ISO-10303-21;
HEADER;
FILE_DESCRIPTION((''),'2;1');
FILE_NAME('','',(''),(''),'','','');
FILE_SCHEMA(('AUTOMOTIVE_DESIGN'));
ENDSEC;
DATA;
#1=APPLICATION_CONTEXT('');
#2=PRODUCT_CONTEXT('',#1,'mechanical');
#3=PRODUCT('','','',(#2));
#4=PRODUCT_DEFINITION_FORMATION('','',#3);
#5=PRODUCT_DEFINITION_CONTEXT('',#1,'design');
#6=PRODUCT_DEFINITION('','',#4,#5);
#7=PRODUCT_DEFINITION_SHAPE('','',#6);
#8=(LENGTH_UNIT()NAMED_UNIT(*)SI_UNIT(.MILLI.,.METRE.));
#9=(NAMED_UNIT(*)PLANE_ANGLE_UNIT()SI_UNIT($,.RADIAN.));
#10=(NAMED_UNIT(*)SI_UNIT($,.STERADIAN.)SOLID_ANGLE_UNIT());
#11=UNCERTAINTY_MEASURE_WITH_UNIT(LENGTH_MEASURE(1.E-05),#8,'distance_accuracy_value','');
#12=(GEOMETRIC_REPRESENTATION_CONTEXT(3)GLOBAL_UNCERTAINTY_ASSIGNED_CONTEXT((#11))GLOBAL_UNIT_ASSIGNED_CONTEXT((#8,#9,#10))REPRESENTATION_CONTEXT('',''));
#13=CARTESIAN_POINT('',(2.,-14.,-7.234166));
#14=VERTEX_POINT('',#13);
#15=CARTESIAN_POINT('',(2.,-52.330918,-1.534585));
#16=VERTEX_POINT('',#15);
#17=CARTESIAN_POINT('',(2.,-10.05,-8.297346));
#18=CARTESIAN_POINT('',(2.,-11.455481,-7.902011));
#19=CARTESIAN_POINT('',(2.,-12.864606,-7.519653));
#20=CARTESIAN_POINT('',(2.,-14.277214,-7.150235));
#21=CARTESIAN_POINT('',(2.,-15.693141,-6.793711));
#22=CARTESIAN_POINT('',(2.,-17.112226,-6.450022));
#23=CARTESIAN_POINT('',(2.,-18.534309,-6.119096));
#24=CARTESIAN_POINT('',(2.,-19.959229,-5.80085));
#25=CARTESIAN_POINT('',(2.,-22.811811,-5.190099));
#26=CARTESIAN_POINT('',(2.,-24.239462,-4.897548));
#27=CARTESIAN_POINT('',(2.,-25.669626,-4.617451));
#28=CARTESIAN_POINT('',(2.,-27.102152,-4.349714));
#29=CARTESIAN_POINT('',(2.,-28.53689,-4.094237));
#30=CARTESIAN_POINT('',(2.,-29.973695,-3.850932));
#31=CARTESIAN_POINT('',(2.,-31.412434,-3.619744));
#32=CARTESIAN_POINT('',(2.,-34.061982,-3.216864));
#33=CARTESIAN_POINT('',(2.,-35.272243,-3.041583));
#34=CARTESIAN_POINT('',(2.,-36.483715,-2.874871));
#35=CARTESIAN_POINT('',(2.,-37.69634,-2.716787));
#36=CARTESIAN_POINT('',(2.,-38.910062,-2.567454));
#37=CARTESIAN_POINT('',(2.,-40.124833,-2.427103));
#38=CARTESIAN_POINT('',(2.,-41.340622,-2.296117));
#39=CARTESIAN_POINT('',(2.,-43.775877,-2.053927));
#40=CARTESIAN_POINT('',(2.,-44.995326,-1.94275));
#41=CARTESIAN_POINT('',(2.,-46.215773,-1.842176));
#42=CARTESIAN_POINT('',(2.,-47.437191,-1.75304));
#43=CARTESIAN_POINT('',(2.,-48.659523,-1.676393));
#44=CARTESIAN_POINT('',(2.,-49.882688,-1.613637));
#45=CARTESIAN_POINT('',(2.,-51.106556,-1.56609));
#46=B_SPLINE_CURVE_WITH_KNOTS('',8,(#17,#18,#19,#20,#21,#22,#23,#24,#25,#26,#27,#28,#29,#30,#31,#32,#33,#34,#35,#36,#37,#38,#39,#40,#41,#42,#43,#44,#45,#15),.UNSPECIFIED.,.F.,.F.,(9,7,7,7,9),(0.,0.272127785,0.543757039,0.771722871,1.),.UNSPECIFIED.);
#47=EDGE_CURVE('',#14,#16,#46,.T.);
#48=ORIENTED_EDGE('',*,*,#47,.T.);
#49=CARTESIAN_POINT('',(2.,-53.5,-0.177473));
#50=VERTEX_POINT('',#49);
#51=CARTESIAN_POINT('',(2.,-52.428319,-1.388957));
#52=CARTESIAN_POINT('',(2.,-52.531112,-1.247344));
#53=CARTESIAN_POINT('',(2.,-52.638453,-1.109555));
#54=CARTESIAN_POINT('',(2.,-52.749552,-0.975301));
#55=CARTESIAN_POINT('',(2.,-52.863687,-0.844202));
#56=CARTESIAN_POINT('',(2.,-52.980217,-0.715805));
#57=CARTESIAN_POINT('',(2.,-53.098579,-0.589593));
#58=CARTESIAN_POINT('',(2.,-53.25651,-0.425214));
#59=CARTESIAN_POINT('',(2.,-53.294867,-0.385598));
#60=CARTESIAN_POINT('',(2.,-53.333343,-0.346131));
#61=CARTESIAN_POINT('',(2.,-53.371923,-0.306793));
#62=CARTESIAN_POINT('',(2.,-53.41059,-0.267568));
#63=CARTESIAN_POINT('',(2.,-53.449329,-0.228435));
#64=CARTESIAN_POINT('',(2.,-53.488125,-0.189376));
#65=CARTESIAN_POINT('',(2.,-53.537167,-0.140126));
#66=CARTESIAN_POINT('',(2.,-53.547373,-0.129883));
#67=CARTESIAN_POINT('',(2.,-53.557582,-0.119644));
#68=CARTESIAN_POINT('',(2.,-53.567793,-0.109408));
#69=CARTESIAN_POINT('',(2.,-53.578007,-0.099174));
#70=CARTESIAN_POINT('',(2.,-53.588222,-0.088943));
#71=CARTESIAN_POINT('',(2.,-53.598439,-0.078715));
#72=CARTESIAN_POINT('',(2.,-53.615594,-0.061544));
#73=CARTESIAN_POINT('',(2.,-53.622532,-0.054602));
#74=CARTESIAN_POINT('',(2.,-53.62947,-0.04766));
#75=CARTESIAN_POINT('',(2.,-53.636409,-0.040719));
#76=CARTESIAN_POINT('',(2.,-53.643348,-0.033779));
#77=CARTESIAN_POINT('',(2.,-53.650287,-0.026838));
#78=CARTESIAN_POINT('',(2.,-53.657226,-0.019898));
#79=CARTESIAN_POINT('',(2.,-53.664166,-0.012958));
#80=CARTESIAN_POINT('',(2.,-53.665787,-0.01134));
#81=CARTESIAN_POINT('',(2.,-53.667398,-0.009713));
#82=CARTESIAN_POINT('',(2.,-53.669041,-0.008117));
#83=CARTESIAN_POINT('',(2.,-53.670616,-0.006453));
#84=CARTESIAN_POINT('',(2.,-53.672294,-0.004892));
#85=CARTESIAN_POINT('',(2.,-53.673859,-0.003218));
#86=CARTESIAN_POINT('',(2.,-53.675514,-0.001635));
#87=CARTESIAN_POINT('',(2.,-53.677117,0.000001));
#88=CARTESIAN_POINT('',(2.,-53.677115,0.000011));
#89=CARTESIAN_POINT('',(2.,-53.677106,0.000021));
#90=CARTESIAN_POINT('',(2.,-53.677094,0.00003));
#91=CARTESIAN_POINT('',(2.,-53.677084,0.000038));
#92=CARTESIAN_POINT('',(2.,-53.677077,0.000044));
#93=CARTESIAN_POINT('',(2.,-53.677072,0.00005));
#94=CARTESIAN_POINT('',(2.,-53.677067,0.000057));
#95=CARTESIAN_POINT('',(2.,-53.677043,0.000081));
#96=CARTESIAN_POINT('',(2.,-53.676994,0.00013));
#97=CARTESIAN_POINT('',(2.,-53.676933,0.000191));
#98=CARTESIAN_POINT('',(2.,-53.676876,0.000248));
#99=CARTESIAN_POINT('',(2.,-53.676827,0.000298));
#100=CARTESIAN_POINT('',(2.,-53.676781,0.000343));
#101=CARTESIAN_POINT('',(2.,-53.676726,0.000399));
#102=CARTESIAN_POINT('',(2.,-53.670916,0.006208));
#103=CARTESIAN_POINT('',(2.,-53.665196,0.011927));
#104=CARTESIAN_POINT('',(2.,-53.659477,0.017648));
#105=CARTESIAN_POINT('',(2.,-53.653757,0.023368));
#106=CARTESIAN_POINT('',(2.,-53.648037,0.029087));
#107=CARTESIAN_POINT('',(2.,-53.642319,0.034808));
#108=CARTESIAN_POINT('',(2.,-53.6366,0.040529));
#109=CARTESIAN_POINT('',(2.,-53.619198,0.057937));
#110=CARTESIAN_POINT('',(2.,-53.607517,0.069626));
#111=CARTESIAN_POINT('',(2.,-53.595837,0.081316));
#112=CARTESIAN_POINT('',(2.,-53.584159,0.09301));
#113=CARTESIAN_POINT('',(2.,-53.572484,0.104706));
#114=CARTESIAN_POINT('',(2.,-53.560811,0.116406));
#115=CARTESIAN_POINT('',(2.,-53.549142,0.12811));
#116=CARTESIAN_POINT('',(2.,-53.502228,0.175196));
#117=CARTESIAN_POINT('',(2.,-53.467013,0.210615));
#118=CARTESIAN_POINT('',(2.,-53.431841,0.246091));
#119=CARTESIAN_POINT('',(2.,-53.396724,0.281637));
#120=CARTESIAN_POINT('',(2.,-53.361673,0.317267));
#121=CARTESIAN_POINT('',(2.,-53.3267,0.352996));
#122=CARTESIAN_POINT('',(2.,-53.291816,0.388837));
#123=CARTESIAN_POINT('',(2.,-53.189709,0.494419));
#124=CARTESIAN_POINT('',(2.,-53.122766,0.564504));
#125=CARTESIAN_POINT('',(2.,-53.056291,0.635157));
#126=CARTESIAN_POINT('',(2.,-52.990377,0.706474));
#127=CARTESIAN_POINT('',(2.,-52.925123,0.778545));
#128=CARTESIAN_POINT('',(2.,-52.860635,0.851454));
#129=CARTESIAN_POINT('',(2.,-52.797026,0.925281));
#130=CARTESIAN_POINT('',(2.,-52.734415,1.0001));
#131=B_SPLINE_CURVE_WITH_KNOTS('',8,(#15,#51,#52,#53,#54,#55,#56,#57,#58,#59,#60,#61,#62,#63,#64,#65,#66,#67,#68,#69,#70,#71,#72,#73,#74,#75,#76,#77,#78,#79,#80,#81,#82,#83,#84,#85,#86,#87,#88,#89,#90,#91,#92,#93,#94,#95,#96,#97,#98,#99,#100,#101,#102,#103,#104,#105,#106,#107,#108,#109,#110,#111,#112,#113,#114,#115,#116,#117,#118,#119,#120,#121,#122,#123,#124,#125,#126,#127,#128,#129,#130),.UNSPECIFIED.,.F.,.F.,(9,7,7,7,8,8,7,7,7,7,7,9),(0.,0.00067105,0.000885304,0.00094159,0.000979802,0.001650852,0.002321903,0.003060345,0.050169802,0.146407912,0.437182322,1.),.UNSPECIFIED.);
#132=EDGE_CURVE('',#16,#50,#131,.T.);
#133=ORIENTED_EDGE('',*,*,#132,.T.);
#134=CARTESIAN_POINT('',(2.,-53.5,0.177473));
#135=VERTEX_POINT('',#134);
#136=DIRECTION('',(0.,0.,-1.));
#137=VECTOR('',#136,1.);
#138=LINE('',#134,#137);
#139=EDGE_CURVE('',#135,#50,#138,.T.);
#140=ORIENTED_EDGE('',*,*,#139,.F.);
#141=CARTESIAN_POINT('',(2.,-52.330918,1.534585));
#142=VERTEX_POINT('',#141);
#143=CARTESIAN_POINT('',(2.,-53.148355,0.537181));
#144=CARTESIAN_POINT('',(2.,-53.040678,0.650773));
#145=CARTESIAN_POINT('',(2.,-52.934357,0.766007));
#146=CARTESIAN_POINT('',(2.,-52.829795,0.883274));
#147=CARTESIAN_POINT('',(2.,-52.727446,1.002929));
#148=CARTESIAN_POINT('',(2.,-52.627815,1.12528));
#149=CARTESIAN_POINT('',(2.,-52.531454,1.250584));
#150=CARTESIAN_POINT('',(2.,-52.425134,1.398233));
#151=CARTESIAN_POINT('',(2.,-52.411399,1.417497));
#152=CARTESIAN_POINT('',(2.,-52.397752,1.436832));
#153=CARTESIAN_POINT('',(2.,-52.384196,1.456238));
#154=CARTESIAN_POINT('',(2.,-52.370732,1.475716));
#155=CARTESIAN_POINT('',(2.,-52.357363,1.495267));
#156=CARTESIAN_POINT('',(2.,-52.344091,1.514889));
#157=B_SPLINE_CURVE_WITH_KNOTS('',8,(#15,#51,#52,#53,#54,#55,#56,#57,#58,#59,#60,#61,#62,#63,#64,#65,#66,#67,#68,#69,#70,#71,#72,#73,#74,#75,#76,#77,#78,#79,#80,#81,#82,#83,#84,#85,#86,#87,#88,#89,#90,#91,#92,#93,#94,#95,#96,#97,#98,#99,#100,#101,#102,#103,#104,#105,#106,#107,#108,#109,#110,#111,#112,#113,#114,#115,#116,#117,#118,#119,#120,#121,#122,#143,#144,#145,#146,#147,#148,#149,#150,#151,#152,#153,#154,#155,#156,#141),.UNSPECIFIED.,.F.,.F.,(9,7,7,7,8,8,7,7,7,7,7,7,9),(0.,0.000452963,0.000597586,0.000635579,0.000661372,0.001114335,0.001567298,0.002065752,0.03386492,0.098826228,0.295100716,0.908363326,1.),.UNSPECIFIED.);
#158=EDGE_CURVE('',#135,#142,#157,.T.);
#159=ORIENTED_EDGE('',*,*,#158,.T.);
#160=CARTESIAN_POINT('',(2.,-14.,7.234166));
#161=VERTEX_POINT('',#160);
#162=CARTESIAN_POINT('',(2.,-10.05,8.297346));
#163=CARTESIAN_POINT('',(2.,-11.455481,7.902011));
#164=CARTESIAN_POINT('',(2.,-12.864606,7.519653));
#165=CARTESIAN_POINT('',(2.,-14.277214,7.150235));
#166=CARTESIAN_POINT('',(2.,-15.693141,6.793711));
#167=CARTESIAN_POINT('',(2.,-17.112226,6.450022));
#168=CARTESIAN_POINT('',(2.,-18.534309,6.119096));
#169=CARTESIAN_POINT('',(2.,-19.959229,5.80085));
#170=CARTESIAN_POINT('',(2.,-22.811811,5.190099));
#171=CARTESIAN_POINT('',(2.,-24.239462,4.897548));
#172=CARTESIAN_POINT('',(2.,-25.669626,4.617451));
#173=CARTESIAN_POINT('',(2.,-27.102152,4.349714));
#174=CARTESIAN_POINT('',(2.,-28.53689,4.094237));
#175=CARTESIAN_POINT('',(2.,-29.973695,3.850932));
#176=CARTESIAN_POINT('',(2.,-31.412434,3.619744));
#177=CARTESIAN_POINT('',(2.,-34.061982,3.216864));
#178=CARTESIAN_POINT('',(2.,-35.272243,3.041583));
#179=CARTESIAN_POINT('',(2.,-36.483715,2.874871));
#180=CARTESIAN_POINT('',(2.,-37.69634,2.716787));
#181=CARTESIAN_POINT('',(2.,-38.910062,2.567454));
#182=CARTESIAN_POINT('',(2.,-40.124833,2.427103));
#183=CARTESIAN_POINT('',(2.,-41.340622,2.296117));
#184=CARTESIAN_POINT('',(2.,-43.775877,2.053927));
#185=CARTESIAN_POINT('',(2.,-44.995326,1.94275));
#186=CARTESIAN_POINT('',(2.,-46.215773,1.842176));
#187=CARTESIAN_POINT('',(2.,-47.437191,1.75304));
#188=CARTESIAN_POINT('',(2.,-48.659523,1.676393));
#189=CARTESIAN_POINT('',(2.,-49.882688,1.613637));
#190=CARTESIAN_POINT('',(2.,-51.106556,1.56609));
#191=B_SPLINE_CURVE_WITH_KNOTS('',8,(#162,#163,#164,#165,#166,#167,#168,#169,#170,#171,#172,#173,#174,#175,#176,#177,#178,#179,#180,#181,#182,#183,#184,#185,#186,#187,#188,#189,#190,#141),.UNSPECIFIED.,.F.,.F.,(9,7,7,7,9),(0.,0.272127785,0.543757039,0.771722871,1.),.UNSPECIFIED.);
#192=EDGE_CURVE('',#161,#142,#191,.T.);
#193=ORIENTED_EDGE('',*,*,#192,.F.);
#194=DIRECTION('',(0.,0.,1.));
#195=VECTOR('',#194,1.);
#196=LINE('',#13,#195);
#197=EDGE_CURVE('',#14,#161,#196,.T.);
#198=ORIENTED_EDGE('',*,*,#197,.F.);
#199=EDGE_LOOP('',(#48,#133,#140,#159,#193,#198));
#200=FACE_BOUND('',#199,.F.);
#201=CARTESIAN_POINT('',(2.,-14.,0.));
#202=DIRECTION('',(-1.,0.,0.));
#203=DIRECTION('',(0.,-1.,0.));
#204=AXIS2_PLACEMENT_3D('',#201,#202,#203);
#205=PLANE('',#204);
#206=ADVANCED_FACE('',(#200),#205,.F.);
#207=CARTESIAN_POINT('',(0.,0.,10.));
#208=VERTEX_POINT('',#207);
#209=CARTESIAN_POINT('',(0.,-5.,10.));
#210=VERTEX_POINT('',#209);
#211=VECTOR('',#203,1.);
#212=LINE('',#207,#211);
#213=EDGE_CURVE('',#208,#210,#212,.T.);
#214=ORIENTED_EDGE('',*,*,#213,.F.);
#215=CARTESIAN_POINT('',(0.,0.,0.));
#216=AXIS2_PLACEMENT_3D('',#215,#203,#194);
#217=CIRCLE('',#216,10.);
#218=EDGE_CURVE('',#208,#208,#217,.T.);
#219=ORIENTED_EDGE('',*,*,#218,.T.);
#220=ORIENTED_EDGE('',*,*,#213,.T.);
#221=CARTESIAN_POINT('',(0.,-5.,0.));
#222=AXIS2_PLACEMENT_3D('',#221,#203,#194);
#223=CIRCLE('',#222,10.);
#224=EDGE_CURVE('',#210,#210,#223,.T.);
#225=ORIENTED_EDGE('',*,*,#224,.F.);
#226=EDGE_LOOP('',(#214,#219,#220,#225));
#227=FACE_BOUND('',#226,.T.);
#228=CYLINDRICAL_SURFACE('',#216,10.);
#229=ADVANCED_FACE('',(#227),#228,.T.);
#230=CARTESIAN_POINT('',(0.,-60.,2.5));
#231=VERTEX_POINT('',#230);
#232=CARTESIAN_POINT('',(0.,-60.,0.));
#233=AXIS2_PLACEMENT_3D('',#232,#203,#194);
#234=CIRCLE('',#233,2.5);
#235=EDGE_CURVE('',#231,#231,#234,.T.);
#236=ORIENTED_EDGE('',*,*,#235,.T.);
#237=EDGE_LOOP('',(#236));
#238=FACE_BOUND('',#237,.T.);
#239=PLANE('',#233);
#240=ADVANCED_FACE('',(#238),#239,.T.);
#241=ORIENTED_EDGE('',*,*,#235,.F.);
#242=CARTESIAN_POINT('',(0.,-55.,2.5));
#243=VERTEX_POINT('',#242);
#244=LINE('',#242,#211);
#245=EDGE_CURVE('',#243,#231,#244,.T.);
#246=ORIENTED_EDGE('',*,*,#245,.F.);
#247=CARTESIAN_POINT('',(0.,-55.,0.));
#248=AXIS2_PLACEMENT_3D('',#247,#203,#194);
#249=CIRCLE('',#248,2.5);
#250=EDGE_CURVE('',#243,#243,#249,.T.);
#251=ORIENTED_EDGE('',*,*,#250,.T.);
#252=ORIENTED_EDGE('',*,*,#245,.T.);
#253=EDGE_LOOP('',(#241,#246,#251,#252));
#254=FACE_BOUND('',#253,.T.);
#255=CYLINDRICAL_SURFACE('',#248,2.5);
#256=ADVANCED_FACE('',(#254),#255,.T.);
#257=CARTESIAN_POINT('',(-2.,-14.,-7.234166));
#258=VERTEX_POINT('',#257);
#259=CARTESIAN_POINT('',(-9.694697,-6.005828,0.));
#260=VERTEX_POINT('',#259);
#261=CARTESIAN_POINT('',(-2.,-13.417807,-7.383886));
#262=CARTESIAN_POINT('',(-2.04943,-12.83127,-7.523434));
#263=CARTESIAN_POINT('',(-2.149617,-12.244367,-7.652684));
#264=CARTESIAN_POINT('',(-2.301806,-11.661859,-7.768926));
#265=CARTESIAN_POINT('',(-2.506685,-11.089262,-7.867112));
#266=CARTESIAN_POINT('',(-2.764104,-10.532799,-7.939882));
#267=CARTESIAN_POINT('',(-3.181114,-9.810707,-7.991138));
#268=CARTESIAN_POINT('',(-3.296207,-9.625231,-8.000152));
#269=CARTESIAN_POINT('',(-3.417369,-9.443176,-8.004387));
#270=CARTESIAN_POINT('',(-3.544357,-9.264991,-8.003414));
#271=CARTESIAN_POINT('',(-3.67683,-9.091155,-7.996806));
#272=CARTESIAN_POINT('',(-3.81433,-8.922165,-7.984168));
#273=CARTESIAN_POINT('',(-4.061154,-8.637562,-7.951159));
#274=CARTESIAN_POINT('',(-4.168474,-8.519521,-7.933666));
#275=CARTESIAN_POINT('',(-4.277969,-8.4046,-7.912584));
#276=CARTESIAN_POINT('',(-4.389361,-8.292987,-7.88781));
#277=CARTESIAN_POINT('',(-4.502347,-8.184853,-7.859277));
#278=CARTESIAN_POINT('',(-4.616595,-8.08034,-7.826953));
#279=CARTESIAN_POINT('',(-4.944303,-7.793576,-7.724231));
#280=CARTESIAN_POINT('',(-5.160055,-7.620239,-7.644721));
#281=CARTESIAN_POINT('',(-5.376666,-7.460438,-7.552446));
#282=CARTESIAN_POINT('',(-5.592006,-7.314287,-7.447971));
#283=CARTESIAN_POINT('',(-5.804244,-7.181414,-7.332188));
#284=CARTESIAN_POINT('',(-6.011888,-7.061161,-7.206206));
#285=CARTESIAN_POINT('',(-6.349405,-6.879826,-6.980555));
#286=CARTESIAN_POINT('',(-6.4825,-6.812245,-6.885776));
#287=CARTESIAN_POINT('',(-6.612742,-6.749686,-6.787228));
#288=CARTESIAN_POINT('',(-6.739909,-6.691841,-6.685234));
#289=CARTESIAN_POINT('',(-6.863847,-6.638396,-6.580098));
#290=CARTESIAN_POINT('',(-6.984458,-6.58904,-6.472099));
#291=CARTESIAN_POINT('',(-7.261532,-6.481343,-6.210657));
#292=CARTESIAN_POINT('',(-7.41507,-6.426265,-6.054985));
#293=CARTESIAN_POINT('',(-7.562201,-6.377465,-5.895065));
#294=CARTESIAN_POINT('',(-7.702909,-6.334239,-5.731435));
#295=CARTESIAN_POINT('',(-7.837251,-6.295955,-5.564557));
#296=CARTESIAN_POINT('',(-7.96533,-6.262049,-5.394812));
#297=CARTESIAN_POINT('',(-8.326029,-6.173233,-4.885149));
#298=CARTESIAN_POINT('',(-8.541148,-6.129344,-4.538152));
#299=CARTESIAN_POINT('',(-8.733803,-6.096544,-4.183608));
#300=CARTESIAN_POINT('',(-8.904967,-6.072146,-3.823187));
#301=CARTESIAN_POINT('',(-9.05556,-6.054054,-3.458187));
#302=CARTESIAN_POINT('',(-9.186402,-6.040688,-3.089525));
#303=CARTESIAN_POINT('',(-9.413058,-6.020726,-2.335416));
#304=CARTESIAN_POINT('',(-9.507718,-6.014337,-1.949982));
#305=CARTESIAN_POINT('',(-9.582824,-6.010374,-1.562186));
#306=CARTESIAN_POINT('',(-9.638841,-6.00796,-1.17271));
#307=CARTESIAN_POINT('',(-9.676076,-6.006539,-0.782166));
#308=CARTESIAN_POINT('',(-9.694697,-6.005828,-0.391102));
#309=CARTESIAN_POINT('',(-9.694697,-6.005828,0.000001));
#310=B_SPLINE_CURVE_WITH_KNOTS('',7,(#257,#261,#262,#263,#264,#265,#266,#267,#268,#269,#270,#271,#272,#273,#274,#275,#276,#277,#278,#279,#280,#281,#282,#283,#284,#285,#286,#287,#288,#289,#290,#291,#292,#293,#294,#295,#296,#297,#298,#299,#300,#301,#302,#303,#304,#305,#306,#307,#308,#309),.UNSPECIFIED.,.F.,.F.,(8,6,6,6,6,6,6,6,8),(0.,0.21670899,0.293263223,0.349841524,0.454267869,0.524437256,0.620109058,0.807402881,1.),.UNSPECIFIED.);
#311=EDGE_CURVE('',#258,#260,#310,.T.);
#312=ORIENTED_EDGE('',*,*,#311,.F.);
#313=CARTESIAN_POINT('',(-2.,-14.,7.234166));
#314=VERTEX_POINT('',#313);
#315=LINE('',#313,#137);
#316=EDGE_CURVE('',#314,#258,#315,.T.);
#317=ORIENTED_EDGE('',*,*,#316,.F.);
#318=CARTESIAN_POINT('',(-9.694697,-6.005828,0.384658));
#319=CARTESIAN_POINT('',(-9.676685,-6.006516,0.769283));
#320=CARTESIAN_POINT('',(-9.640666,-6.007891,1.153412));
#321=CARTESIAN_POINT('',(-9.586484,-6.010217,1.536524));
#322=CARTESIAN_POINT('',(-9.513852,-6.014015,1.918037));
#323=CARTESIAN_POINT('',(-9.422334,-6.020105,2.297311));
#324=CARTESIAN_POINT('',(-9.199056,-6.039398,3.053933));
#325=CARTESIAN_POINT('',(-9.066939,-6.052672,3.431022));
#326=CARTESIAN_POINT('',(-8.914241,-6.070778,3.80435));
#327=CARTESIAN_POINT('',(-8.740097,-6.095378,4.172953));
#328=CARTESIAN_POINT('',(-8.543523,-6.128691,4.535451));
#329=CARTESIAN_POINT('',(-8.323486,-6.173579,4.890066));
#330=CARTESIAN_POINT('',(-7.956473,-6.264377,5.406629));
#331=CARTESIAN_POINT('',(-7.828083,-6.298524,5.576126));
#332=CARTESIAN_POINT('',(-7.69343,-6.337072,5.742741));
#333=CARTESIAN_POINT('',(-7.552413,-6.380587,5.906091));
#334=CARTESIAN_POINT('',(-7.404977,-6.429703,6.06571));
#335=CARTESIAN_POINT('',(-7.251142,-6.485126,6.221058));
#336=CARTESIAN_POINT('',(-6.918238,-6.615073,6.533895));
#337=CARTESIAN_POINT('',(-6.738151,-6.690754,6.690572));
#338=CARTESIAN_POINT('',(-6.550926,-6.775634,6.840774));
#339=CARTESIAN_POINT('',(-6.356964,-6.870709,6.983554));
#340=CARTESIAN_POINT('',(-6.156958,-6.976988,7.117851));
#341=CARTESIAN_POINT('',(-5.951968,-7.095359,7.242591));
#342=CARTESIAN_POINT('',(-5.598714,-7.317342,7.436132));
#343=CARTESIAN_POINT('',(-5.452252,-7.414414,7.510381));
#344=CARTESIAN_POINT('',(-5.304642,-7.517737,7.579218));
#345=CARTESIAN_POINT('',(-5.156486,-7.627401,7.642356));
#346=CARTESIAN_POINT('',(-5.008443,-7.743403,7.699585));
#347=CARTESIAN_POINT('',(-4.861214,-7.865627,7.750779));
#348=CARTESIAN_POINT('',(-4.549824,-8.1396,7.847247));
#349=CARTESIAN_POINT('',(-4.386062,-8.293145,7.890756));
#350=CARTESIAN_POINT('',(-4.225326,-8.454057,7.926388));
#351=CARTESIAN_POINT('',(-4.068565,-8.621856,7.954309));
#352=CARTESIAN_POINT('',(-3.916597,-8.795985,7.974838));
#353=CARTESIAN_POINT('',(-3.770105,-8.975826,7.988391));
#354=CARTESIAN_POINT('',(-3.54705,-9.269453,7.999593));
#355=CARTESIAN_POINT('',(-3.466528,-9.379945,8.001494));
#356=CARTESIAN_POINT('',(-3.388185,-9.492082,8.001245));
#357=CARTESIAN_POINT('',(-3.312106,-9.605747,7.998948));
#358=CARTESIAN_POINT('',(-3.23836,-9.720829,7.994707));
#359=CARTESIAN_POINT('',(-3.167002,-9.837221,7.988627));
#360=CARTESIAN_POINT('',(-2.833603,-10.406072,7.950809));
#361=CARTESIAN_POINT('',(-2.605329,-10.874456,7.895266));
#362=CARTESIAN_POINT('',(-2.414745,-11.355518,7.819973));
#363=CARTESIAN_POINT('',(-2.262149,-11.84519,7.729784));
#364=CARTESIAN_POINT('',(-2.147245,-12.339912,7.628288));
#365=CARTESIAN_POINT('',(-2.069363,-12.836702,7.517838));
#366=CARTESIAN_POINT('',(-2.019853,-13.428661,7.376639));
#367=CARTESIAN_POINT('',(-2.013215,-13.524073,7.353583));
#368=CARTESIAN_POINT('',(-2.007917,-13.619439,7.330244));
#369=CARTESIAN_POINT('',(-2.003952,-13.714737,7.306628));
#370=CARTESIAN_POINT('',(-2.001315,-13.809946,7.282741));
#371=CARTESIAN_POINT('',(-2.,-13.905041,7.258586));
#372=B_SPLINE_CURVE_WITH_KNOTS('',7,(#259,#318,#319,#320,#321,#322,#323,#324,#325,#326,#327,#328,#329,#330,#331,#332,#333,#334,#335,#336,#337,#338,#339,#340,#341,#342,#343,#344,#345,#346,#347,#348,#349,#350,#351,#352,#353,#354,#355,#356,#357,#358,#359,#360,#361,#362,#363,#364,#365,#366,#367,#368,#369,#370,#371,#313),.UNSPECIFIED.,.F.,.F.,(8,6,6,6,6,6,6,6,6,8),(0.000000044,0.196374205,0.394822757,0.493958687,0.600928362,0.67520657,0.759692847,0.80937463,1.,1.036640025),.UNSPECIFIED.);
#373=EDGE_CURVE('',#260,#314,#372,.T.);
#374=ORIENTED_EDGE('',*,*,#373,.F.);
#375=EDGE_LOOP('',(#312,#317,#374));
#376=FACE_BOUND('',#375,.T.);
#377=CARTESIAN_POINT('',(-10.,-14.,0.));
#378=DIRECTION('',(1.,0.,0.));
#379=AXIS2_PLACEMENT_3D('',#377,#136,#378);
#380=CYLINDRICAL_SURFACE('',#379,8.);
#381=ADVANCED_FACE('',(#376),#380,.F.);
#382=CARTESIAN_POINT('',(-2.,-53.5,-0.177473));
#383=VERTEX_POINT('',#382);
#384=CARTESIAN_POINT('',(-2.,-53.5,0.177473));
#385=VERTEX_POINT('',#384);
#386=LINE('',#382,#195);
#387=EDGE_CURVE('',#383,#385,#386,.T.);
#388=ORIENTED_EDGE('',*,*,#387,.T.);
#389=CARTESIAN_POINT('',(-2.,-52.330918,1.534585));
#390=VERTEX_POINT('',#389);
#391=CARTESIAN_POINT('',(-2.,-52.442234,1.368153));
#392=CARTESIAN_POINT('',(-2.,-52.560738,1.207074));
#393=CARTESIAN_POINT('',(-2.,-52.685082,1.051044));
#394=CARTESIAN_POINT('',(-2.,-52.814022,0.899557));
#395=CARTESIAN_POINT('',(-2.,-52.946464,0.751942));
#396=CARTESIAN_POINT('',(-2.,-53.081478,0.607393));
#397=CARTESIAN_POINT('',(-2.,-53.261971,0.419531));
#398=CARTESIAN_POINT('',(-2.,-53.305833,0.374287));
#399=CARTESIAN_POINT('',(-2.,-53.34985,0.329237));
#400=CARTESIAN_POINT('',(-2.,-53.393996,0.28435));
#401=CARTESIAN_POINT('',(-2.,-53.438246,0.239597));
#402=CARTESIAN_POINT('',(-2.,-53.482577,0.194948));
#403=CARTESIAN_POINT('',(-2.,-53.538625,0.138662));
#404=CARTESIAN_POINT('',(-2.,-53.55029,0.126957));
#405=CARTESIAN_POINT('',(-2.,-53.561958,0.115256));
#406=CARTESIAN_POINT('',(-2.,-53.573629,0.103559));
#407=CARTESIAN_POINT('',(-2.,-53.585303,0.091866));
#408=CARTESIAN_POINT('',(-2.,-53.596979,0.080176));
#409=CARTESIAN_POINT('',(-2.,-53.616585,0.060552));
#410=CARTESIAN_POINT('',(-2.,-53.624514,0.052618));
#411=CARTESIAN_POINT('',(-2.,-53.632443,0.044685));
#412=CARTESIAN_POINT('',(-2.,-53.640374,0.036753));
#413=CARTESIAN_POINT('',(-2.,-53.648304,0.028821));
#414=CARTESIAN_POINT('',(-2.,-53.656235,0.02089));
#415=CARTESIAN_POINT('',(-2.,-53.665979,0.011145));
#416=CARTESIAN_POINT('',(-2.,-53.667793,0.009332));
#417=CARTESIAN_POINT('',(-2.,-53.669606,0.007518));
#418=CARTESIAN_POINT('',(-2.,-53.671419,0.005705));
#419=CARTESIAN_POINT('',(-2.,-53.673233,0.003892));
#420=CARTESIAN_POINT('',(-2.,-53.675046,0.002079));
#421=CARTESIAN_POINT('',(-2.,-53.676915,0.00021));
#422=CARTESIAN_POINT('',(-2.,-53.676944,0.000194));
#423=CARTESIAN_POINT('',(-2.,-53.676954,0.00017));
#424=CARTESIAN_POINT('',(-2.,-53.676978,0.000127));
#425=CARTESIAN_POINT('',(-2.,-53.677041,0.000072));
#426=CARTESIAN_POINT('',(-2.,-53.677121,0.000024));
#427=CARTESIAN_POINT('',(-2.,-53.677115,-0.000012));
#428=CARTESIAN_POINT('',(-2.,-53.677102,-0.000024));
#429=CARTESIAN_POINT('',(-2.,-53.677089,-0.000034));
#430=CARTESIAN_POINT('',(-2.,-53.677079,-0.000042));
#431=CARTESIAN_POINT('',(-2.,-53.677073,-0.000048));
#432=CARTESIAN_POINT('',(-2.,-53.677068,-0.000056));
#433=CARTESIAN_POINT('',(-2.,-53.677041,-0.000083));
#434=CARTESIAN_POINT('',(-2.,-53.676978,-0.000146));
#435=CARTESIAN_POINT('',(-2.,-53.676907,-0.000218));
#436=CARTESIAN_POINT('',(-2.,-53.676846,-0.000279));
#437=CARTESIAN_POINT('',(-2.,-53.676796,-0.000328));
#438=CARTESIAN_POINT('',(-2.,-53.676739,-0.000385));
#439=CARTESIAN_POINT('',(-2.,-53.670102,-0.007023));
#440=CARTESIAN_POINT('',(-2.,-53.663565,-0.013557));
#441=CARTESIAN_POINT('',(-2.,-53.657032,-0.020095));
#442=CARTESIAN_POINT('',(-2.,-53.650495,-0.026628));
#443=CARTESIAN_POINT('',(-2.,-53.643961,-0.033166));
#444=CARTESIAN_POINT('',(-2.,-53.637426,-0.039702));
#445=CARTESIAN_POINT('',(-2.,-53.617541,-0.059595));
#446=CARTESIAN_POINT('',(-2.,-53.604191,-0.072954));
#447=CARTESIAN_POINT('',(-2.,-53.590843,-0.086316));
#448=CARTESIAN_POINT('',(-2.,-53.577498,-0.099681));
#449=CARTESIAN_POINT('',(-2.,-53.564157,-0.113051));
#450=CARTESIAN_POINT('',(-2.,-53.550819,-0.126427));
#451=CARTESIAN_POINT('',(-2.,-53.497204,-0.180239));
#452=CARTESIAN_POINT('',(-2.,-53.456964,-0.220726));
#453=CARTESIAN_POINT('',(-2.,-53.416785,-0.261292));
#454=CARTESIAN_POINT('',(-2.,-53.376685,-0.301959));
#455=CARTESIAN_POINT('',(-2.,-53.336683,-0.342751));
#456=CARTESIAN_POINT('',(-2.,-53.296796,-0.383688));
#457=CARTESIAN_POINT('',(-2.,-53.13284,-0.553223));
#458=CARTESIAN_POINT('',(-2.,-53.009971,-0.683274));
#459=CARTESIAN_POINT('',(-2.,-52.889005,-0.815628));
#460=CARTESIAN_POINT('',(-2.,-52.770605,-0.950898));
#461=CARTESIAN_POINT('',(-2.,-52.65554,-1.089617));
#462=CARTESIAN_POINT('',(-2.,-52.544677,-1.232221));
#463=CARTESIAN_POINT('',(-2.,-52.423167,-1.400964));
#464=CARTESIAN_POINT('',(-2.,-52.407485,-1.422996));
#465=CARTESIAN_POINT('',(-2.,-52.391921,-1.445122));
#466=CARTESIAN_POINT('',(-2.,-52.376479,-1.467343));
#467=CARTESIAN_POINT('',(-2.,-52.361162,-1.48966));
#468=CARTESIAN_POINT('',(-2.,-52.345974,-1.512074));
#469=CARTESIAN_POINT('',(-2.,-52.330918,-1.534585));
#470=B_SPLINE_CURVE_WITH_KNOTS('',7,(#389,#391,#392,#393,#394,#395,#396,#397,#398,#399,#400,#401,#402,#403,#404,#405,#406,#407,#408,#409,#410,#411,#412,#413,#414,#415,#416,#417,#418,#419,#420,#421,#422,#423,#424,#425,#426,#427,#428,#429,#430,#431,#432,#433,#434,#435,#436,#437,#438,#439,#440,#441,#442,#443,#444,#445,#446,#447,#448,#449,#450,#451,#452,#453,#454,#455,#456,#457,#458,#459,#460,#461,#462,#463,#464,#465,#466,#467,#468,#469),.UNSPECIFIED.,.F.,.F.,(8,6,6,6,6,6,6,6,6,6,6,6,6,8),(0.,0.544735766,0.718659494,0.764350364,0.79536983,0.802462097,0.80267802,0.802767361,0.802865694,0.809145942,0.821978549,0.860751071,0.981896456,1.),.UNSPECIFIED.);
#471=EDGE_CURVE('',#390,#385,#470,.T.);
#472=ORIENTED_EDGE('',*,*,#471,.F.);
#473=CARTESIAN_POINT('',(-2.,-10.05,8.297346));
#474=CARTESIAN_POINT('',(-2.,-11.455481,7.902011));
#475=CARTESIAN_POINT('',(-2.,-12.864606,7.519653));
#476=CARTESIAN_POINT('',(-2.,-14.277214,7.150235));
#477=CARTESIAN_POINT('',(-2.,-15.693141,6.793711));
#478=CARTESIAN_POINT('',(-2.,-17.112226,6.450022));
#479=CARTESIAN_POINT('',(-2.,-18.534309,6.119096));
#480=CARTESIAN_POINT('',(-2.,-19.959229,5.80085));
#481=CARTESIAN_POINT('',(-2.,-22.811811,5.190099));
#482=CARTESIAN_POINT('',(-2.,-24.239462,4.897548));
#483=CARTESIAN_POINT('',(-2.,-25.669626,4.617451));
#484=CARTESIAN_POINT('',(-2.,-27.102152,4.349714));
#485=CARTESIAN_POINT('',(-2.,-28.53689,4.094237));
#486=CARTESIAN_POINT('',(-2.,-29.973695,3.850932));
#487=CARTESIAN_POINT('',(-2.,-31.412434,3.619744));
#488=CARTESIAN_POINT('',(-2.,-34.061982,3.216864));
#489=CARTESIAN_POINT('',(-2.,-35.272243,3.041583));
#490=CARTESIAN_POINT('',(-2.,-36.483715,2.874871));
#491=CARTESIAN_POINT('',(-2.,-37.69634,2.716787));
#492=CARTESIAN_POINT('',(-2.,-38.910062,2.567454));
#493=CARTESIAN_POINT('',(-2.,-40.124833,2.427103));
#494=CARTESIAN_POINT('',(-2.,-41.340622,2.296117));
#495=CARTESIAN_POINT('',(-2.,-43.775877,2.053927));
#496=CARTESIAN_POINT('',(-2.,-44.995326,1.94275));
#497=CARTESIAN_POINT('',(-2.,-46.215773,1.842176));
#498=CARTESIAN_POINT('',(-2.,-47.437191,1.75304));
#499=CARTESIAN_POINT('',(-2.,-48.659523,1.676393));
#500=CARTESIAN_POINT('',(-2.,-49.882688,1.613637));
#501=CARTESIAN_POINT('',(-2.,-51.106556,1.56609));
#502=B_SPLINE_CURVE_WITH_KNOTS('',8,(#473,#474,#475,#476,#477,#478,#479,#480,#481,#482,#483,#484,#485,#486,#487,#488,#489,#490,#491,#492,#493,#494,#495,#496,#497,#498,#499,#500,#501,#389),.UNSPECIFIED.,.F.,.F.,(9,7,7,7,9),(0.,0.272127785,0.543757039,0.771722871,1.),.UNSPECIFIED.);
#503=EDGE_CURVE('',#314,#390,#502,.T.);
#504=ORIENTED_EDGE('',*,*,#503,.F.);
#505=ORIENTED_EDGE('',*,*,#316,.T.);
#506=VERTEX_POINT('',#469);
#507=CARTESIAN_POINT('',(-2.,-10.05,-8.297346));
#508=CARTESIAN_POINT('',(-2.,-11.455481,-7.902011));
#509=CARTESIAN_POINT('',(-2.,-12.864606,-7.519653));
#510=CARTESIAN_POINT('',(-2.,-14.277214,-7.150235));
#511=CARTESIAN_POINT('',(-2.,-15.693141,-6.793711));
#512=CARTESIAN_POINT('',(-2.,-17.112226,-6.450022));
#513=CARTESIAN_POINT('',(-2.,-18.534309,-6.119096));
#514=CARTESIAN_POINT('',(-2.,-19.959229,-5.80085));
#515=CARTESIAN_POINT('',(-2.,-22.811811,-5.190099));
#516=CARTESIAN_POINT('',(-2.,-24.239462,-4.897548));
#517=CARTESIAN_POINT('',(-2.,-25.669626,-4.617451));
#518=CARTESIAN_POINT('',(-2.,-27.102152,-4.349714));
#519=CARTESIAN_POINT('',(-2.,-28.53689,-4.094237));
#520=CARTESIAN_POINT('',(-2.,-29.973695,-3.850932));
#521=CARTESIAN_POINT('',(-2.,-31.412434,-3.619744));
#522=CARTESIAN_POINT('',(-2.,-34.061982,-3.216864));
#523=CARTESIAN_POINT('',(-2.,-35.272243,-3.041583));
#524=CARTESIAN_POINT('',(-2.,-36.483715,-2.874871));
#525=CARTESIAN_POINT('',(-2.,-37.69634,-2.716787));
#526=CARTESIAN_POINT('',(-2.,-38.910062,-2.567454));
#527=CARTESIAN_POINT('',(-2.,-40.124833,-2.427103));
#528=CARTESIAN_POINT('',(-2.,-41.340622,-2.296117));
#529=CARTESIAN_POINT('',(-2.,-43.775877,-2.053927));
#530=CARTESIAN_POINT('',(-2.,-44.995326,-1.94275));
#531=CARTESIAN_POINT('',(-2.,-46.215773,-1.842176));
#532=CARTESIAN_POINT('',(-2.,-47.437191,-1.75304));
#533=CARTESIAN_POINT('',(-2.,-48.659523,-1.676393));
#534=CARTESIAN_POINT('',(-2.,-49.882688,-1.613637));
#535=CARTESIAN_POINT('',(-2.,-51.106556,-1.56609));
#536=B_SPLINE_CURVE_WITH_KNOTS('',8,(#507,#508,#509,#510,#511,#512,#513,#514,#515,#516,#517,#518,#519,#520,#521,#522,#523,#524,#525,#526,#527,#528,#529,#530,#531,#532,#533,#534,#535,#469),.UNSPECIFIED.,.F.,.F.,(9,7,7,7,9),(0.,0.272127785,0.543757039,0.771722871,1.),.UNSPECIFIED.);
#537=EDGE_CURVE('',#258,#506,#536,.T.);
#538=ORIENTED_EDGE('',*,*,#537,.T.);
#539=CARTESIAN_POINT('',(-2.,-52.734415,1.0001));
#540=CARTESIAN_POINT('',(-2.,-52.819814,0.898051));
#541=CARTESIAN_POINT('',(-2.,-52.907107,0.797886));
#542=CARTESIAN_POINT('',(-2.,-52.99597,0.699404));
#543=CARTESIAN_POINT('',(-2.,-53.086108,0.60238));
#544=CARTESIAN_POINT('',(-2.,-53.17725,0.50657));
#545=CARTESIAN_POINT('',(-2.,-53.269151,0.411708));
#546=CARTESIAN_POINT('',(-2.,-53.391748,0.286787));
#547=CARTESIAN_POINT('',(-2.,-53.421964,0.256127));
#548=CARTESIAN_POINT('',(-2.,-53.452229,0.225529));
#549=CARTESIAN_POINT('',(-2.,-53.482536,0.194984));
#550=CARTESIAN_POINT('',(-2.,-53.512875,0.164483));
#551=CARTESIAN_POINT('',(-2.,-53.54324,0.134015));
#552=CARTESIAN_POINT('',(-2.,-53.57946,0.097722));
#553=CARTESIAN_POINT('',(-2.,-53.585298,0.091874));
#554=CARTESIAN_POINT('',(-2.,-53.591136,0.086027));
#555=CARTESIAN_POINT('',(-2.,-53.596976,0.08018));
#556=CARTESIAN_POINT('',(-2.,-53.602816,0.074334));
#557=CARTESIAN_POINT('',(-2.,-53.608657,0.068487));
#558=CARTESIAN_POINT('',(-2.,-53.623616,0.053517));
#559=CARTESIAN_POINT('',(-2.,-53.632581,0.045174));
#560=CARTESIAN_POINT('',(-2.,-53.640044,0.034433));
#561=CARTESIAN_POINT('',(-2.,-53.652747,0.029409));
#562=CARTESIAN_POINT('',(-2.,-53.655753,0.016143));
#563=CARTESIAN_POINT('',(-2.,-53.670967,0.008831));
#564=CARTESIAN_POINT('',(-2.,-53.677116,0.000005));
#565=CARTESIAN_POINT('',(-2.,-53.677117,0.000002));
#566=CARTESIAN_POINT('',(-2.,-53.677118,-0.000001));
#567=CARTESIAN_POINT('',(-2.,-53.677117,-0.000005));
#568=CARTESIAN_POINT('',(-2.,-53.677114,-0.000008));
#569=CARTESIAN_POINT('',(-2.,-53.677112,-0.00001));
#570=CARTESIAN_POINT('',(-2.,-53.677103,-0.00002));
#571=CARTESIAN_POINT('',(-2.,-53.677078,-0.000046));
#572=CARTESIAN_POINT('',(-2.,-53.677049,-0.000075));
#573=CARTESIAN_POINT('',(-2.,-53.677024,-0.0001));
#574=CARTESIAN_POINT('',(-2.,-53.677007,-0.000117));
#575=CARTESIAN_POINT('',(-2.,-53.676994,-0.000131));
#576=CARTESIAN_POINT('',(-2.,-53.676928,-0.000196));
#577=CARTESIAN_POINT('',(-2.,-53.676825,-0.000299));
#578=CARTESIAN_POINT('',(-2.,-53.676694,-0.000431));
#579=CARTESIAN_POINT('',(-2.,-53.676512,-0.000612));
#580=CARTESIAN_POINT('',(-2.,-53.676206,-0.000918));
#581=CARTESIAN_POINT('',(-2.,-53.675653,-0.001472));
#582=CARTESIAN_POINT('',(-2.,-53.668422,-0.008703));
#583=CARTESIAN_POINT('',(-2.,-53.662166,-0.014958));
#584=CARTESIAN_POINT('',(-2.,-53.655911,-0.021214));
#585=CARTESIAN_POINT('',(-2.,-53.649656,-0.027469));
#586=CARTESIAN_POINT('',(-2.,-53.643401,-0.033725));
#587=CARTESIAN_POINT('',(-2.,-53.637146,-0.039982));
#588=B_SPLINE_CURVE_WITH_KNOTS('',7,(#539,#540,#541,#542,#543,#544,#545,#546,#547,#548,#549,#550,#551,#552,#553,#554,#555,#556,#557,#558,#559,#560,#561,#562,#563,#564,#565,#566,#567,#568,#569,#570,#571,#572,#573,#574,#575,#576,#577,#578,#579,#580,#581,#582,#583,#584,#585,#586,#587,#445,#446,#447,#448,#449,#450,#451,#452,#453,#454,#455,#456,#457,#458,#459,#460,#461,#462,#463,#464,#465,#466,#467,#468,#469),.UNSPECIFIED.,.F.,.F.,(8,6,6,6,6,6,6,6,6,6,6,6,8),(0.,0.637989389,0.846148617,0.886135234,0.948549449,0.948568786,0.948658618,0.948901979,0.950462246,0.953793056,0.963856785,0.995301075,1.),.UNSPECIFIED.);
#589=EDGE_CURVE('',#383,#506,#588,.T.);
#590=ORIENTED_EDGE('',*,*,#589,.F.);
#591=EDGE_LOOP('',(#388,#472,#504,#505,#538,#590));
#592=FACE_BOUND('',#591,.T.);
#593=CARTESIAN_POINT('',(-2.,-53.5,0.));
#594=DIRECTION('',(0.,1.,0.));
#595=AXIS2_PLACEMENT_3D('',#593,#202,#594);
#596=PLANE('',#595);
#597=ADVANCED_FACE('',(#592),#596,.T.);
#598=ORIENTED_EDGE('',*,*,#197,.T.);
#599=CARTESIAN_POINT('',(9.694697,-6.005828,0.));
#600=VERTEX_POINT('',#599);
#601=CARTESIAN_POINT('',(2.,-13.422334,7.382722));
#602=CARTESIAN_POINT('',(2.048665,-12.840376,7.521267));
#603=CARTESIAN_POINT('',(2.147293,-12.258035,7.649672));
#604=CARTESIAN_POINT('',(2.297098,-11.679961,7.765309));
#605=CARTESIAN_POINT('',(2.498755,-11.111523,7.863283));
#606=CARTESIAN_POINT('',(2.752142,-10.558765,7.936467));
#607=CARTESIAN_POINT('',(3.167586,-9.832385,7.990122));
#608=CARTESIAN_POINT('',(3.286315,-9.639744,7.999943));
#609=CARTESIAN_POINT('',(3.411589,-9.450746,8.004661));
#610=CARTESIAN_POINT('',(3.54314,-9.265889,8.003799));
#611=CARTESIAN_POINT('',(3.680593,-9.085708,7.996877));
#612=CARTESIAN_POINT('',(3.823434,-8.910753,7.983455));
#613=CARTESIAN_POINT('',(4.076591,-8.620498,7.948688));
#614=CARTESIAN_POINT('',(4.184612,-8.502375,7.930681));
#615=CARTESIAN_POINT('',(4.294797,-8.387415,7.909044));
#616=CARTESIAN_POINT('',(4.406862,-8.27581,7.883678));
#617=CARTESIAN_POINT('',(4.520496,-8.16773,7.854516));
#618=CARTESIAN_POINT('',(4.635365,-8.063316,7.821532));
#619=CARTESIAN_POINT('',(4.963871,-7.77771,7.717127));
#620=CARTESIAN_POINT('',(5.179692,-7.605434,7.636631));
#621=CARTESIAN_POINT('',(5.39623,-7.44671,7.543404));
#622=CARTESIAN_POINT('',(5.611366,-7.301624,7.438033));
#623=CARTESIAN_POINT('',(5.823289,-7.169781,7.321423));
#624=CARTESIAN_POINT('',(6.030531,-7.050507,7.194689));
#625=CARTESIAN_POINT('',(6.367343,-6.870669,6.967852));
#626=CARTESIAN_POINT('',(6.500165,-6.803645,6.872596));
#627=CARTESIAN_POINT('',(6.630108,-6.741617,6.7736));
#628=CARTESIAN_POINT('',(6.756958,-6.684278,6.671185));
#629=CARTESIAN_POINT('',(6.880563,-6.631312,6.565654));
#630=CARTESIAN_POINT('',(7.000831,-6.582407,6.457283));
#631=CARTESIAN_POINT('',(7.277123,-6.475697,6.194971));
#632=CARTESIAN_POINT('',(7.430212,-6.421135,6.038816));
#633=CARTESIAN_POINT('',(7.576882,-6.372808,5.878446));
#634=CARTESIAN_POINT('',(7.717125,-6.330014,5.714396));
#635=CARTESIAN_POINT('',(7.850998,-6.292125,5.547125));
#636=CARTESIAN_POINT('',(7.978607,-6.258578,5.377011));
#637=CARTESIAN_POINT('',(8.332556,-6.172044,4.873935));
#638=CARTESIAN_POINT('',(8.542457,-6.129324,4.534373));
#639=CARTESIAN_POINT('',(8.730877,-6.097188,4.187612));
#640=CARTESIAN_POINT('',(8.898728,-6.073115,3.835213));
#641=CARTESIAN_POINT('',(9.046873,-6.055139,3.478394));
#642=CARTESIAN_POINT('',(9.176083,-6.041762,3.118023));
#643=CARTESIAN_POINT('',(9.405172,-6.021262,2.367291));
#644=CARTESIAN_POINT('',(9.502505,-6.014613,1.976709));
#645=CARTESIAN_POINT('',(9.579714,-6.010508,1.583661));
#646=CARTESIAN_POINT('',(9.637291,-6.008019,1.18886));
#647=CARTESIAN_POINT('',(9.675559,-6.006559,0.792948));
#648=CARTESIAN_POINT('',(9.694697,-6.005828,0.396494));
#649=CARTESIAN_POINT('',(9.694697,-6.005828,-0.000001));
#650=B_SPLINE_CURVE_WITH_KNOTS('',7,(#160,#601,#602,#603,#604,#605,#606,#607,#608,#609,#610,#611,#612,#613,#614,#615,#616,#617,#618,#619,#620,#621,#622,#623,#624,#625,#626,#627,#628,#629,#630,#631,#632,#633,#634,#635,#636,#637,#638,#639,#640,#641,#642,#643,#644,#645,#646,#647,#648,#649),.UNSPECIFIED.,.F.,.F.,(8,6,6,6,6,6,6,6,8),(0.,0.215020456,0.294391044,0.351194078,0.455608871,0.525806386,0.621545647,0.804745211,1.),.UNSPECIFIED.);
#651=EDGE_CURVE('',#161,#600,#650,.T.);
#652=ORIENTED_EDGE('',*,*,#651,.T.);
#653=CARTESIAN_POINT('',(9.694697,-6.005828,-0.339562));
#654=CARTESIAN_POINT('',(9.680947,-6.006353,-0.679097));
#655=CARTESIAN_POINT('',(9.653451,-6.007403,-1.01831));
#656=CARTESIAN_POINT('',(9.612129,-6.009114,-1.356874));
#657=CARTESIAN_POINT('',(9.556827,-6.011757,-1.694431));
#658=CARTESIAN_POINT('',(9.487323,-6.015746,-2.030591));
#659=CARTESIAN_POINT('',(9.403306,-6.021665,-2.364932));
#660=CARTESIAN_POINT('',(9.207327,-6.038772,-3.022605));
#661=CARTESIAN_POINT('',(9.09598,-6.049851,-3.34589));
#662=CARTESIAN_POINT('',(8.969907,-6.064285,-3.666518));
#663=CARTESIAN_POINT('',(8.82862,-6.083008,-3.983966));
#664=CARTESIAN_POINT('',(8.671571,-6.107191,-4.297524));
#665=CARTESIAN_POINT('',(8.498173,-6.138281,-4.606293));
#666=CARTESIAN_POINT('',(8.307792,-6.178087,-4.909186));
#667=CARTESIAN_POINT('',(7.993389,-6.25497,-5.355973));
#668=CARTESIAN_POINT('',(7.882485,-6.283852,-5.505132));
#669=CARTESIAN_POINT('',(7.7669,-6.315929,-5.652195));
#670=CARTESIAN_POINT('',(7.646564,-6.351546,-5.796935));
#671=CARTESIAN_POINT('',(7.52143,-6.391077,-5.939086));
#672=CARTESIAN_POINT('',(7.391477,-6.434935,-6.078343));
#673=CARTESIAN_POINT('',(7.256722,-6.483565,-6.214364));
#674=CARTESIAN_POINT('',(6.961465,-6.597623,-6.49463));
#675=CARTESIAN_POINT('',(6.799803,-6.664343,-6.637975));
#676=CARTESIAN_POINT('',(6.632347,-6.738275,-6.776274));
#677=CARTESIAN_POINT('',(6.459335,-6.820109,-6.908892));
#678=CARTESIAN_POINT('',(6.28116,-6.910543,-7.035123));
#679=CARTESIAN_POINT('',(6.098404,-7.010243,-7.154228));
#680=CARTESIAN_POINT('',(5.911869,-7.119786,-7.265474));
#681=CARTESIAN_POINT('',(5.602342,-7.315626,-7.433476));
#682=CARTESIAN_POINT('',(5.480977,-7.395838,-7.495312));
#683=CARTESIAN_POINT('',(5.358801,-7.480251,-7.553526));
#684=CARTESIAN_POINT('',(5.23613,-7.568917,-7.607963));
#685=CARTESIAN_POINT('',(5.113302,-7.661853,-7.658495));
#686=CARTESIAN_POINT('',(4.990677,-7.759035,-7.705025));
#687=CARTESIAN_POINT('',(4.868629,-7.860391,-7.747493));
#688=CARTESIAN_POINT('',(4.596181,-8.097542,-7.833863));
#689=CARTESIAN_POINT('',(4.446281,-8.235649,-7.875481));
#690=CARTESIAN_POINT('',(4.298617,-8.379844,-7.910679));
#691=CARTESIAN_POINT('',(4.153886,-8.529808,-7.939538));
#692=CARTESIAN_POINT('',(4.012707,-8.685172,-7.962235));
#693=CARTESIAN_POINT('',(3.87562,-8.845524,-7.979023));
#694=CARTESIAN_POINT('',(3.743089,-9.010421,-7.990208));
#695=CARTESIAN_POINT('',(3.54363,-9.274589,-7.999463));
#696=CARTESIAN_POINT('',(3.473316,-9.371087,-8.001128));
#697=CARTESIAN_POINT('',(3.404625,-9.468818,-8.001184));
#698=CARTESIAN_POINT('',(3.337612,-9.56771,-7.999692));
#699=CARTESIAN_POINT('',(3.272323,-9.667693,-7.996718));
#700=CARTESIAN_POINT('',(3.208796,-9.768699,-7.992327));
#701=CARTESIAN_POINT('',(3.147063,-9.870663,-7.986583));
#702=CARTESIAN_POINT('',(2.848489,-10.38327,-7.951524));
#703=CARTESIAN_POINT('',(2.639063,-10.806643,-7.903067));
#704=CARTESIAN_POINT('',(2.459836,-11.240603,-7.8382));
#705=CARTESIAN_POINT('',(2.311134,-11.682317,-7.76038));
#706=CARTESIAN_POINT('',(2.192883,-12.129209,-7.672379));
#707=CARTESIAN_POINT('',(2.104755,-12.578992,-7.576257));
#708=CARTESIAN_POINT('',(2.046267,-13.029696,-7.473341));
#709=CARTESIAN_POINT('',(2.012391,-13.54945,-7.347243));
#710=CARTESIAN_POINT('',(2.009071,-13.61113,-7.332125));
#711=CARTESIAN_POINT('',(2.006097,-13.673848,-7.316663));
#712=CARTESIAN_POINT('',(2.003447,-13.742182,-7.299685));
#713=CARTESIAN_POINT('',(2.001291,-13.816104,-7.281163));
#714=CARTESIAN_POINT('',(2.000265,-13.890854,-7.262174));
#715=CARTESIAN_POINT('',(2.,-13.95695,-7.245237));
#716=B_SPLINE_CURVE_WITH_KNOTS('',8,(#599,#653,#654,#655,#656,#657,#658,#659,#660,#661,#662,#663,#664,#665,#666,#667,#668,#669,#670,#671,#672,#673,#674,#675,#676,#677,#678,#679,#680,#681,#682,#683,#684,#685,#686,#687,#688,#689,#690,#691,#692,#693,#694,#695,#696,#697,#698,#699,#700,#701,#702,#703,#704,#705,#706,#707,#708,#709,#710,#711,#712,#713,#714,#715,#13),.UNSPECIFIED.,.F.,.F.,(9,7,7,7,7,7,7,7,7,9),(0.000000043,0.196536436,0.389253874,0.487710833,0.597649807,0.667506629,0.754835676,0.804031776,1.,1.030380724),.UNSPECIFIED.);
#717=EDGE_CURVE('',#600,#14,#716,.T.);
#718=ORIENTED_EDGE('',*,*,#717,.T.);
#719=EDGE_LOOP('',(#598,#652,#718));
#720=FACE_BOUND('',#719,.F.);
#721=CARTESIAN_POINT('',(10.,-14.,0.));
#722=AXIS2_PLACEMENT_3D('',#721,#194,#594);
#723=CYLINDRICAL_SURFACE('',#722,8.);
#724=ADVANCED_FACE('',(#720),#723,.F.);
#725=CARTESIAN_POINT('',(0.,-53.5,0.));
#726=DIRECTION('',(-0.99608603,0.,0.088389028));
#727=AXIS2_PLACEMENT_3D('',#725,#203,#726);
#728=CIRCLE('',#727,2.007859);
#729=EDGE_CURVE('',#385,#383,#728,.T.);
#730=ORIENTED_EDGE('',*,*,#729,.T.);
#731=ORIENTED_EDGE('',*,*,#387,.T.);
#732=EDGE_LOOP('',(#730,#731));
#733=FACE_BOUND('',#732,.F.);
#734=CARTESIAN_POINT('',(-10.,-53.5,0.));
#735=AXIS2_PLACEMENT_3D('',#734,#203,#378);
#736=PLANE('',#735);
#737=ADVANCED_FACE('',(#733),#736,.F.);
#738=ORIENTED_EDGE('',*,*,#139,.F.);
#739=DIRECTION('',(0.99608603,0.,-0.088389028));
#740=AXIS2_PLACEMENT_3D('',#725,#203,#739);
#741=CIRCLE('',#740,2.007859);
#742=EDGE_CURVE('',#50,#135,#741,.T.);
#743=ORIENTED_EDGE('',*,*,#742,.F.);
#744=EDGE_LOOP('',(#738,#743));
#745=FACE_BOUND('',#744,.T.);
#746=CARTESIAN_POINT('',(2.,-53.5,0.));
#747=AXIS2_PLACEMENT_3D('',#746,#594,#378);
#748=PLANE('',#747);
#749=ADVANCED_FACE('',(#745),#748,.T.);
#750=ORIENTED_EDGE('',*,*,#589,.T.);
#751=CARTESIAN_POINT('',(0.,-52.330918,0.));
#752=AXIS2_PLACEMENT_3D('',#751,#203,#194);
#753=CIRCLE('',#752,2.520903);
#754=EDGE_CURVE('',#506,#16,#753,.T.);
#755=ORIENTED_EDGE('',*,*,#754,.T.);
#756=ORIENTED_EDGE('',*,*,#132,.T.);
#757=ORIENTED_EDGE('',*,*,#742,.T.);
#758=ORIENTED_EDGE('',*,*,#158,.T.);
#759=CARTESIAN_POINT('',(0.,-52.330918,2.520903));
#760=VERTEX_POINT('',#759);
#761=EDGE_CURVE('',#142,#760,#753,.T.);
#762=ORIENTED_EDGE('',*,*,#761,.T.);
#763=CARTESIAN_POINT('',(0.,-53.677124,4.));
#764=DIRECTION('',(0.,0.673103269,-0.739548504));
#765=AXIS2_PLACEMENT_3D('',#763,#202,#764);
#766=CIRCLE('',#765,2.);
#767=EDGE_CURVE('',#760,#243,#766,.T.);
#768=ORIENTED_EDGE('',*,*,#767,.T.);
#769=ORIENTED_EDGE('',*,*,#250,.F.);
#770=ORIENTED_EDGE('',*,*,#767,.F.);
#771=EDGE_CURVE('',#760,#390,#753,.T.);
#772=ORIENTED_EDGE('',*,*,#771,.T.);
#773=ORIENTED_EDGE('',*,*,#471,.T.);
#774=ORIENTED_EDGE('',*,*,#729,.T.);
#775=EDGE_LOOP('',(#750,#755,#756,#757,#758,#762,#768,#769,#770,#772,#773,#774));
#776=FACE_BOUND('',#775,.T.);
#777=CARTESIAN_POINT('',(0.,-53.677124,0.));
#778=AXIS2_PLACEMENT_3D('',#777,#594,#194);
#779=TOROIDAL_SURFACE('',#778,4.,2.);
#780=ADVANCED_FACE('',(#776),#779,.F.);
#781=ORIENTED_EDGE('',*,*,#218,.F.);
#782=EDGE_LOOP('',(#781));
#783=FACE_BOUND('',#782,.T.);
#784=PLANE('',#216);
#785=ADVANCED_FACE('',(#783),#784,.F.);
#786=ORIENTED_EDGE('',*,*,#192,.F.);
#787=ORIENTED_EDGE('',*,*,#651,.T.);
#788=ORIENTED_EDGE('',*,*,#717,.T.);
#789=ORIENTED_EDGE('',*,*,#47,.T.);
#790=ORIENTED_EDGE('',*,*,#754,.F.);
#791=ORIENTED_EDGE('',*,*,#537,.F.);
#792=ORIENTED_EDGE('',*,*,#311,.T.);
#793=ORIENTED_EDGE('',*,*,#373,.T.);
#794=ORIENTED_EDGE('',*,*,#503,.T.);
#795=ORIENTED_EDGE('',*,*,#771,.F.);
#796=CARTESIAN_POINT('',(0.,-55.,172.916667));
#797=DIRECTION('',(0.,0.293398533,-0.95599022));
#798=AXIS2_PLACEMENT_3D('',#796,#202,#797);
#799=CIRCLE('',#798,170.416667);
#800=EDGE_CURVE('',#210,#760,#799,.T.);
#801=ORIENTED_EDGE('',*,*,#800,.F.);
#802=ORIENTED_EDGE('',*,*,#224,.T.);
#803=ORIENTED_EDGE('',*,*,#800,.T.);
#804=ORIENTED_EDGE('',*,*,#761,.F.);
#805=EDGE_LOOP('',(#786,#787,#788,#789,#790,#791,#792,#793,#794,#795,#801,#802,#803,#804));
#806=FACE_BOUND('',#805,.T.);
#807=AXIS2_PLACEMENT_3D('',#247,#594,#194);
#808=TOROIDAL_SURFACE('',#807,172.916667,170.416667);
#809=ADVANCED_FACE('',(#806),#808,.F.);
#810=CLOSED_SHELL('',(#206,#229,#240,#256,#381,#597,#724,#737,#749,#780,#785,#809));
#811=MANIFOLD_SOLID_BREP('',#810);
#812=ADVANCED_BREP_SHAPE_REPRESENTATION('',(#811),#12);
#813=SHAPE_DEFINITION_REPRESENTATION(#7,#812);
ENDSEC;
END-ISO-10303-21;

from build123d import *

# Parameters (mm, degrees)
F3_DEPTH      = 10.001
F3_DEPTH_BACK = 82


# Not quite as in the source:
# - an extrude ends at something that could not be found from the text; its depth is read off the source's solid


with BuildPart() as f1:
    # F0 (on Right) → F1 (revolve)
    with BuildSketch(Plane.YZ):
        with BuildLine():
            Line((-60, 0), (0, 0))
            Line((0, 0), (0, 10))
            Line((0, 10), (-5, 10))
            ThreePointArc((-5, 10), (-28.4012730043, 4.5885703785), (-52.3309178064, 2.5209029927))
            ThreePointArc((-52.3309178064, 2.5209029927), (-53.6614617682, 2.00006133), (-55, 2.5))
            Line((-55, 2.5), (-60, 2.5))
            Line((-60, 2.5), (-60, 0))
        make_face()
    revolve(axis=Axis((0, -19.4839663044, 0), (0, -1, 0)))

    # F2 (on Top) → F3 (cut, two sides)
    with BuildSketch(Plane.XY) as f3_sk:
        with BuildLine():
            Line((2, -14), (2, -53.5))
            Line((2, -53.5), (10, -53.5))
            Line((10, -53.5), (10, -6))
            ThreePointArc((10, -6), (4.3431457505, -8.3431457505), (2, -14))
        make_face()
        with BuildLine():
            Line((-10, -53.5), (-2, -53.5))
            Line((-2, -53.5), (-2, -14))
            ThreePointArc((-2, -14), (-4.3431457505, -8.3431457505), (-10, -6))
            Line((-10, -6), (-10, -53.5))
        make_face()
    extrude(amount=-F3_DEPTH, mode=Mode.SUBTRACT)
    extrude(f3_sk.sketch, amount=F3_DEPTH_BACK, mode=Mode.SUBTRACT)


solid = f1.part
